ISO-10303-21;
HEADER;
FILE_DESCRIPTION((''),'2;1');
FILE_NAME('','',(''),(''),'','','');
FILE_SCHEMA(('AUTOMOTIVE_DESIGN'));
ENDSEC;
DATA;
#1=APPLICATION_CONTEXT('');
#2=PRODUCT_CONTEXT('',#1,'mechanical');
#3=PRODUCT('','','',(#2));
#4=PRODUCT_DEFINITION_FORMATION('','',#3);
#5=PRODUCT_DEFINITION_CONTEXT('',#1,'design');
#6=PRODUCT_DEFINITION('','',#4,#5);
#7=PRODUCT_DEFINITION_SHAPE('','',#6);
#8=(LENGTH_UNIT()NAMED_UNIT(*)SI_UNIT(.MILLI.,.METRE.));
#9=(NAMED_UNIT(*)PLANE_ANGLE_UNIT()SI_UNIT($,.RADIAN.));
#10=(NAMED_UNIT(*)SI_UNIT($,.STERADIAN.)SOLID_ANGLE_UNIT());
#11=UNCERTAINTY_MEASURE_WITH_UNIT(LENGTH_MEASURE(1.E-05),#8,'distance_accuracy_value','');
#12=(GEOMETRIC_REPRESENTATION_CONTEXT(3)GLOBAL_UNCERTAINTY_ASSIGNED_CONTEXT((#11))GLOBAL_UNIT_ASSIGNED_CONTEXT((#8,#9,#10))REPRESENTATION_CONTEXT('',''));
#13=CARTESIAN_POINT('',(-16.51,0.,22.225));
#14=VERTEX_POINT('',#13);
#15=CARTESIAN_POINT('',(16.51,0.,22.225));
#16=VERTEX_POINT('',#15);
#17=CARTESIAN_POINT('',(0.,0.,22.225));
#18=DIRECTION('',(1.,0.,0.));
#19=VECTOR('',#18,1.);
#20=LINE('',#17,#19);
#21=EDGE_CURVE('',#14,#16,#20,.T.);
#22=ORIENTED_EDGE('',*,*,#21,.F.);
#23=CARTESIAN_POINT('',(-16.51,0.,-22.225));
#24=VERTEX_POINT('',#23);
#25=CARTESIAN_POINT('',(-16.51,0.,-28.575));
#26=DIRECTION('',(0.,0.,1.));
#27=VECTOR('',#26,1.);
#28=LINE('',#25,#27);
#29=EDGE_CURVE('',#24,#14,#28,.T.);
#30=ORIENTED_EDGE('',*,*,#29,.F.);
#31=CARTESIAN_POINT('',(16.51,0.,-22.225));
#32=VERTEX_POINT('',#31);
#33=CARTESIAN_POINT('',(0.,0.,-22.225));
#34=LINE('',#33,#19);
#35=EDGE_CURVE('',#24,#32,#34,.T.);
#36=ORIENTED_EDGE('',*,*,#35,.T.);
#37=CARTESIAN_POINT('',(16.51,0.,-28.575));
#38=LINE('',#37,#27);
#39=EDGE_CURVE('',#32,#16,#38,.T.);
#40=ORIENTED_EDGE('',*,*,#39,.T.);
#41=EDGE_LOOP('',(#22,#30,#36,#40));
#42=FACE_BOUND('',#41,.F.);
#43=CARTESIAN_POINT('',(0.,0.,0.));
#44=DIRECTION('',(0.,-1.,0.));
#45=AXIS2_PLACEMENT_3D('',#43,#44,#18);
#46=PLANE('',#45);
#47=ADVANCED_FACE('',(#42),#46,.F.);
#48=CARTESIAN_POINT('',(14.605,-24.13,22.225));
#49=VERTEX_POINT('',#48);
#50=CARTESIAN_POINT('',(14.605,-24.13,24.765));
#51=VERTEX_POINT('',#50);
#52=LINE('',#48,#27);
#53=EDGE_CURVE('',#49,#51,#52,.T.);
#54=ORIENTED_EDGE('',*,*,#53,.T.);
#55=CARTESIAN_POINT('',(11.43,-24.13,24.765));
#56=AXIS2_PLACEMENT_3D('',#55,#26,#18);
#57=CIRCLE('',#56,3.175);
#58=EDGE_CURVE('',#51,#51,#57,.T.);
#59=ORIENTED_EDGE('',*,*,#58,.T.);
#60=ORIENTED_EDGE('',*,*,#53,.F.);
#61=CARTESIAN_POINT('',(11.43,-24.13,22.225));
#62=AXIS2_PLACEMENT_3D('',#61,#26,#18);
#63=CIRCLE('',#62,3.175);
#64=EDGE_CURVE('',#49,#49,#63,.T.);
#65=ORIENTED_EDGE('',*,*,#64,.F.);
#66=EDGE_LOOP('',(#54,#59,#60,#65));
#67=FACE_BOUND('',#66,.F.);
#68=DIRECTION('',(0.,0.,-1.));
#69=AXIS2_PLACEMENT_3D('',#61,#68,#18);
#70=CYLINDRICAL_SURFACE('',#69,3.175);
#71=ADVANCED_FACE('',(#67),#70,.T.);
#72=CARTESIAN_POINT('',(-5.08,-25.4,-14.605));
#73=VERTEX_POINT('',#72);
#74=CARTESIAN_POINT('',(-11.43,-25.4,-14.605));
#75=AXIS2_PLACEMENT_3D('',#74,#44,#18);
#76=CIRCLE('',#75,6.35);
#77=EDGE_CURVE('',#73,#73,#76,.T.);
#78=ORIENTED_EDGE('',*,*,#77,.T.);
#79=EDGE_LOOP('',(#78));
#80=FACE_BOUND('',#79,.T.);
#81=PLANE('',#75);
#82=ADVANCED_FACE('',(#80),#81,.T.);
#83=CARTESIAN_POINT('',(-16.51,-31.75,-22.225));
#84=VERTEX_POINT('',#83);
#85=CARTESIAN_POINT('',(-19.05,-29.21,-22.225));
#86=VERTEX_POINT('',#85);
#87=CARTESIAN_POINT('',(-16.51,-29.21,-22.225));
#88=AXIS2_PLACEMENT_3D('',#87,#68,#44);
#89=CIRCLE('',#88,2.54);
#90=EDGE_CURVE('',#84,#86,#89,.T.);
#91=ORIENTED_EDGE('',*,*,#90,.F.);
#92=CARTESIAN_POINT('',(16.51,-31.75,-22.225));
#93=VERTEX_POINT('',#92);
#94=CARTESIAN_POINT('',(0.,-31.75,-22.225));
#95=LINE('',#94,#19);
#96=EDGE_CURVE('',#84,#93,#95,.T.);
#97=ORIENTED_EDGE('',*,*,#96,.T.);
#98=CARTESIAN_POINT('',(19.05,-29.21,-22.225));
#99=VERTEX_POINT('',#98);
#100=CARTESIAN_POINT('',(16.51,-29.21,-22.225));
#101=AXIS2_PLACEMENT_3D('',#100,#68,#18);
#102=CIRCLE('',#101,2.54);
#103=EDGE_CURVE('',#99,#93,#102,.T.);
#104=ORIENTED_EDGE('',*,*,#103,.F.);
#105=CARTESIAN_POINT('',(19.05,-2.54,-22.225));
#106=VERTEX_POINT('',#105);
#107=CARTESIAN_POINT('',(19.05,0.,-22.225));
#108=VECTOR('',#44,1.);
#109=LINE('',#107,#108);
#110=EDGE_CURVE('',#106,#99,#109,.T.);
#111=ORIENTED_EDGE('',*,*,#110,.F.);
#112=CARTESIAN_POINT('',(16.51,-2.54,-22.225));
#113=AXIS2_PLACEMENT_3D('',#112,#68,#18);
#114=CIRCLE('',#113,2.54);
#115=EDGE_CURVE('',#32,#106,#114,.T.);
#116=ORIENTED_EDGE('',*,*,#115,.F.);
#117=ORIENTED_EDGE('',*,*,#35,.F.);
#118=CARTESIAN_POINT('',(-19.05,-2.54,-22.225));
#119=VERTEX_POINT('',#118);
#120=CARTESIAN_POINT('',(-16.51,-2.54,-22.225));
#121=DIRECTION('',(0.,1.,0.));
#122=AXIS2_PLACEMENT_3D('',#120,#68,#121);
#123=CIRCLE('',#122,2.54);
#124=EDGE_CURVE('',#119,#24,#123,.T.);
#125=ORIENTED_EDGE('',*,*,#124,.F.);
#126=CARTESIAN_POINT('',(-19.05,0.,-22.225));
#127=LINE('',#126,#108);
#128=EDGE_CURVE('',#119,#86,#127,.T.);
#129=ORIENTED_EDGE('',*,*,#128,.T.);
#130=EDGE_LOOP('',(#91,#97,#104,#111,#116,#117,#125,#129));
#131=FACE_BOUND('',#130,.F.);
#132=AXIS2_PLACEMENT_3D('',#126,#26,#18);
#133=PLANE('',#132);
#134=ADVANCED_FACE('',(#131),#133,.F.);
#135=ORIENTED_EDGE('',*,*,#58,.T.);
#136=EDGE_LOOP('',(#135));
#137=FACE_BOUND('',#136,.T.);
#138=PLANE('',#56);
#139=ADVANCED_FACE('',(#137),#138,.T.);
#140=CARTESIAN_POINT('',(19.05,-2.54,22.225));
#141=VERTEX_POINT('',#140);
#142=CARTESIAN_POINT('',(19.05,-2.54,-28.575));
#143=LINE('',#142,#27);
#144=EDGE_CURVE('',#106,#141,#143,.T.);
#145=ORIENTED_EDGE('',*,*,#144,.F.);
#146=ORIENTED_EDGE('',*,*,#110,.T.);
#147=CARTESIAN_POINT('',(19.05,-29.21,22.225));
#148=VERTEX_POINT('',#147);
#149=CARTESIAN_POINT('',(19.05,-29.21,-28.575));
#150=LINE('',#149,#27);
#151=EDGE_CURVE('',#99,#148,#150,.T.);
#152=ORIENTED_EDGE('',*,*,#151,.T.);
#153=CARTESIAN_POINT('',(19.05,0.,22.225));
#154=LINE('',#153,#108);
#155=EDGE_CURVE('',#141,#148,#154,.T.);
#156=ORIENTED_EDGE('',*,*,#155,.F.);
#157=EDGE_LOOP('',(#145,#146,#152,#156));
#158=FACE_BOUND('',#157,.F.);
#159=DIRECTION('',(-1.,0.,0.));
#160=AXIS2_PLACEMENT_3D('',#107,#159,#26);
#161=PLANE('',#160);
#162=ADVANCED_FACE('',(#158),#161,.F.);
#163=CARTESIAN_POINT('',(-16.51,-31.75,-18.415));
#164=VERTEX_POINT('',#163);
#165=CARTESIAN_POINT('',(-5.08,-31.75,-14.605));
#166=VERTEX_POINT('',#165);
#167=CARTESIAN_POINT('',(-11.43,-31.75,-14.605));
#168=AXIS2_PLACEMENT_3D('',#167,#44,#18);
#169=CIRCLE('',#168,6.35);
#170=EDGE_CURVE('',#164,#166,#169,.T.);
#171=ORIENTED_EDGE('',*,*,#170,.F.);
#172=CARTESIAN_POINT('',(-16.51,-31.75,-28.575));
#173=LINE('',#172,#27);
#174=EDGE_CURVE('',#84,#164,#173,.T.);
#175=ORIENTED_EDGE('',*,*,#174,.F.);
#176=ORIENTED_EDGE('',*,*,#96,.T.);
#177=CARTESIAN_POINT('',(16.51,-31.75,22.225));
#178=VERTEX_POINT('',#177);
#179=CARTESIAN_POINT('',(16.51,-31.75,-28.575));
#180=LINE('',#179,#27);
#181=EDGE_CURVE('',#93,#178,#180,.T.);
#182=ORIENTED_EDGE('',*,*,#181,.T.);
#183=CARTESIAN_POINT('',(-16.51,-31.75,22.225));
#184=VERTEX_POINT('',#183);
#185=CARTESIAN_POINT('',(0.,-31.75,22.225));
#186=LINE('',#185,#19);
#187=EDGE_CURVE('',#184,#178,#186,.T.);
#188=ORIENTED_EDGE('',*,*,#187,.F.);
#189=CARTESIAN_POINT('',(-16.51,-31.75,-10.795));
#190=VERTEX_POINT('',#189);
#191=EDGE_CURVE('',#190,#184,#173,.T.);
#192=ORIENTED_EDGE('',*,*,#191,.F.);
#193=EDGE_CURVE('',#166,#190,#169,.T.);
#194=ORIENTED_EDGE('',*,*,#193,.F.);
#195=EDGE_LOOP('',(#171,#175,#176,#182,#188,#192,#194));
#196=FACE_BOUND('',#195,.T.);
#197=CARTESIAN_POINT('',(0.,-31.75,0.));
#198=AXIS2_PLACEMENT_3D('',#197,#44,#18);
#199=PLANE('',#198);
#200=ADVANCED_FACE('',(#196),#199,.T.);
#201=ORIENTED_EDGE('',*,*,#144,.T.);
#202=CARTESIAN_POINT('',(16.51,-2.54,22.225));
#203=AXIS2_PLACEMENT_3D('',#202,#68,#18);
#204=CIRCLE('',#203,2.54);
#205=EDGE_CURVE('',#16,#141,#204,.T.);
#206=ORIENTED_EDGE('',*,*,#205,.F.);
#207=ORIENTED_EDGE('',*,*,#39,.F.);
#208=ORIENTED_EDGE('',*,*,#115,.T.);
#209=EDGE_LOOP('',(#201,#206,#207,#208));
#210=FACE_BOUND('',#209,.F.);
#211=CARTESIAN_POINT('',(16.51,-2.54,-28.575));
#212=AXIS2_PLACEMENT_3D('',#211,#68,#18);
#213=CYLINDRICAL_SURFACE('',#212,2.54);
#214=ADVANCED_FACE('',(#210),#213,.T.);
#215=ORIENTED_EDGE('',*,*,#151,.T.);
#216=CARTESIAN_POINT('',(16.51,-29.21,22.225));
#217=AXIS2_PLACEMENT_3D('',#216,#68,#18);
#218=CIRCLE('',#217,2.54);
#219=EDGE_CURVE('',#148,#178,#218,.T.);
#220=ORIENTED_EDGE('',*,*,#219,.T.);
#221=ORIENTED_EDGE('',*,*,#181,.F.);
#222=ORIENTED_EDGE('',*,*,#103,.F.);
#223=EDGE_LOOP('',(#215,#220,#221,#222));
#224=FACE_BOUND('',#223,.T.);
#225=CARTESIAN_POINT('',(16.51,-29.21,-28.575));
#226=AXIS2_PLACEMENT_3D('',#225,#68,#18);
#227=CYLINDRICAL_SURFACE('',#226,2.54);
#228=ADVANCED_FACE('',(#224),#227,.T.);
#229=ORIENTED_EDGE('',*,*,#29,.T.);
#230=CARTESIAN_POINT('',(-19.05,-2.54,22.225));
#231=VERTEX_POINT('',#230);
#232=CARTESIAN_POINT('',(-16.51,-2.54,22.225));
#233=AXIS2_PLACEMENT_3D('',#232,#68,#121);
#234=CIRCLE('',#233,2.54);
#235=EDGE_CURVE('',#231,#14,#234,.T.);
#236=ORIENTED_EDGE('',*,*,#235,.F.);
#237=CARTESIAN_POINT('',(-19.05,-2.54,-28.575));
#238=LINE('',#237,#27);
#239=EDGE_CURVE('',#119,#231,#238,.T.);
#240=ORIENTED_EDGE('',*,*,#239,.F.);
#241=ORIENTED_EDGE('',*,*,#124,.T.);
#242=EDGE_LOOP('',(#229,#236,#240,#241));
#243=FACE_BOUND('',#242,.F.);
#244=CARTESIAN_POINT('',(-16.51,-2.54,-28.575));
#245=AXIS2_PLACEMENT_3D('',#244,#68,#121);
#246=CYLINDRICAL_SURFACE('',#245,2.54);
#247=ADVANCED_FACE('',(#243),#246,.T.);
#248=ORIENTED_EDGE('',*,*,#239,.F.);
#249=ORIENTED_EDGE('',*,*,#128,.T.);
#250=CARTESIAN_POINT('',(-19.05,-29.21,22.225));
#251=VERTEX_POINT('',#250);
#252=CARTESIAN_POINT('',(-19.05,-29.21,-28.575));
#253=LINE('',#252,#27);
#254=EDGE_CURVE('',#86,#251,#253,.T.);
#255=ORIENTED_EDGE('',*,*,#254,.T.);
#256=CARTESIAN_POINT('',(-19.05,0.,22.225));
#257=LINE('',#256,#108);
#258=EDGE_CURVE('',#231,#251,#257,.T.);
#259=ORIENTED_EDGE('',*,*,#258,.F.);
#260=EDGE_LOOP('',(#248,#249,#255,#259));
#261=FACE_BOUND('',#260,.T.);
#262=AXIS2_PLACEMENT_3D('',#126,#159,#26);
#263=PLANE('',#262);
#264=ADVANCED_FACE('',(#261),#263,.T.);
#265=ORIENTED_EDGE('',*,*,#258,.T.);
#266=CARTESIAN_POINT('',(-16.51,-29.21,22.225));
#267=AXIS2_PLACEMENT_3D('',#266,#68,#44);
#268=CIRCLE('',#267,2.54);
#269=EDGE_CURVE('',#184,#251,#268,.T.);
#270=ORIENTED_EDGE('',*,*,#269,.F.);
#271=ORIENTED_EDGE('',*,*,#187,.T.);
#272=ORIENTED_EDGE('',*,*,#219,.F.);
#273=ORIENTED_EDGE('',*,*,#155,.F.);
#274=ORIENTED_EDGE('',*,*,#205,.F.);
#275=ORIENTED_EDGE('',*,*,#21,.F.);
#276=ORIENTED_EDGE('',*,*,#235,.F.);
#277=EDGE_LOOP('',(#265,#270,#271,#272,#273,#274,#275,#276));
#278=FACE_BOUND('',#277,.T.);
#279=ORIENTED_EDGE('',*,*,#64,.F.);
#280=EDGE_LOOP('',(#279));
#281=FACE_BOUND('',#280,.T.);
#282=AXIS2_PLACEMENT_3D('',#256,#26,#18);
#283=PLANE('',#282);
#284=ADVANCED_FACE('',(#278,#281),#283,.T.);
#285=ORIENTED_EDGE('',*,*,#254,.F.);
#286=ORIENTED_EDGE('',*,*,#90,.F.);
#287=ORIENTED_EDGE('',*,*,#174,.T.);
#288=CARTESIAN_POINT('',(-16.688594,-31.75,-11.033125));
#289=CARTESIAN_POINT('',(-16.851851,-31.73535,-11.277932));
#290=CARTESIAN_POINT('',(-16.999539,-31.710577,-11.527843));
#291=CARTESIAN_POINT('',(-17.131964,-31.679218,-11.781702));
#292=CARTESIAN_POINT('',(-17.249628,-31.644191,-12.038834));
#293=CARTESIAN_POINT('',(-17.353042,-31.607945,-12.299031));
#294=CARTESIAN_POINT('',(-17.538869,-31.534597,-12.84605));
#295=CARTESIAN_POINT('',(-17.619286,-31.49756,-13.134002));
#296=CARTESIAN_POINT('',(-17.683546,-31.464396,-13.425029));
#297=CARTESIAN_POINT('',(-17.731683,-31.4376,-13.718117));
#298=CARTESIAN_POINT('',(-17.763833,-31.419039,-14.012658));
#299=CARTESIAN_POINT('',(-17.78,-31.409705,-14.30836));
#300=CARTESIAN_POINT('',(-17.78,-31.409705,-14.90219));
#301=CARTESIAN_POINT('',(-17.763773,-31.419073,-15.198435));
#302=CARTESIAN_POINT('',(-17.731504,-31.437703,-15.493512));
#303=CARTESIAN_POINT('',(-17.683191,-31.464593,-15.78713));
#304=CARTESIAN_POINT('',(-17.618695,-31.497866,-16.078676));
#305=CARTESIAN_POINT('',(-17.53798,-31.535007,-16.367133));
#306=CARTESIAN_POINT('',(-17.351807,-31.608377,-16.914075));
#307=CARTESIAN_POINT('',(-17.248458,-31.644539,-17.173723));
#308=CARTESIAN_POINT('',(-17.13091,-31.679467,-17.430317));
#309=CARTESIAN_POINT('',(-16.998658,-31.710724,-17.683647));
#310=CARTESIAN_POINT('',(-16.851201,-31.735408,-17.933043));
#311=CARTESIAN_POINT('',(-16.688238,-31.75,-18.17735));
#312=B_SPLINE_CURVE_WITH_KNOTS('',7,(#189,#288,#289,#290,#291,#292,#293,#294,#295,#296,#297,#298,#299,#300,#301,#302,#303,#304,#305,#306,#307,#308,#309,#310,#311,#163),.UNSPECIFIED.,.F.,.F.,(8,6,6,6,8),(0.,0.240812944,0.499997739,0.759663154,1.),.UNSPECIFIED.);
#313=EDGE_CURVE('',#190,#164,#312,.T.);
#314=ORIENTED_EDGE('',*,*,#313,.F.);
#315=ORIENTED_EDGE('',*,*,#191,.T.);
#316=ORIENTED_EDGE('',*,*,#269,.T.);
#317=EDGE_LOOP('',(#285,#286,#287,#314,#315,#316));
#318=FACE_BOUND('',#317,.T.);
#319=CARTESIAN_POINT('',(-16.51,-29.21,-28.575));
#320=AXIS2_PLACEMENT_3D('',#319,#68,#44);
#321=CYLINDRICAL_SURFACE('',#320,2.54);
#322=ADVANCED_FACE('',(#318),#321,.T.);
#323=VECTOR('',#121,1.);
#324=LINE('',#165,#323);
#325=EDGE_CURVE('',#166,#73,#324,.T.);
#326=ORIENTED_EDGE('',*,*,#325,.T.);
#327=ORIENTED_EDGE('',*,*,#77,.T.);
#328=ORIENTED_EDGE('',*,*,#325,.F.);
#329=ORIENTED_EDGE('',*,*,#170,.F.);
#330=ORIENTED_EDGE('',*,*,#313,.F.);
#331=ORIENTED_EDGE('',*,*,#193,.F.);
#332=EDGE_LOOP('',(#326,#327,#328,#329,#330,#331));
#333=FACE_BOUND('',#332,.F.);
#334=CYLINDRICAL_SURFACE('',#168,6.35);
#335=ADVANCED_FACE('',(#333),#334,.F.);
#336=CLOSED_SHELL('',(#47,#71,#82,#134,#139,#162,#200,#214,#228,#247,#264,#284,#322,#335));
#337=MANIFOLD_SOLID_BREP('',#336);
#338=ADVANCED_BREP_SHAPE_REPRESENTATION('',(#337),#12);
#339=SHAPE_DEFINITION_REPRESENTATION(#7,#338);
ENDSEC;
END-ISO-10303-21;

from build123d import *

# Parameters (mm, degrees)
F0_W        = 38.1
F0_H        = 44.45
F1_DEPTH    = 31.75
F2_R        = 6.35
F3_DEPTH    = 6.35
F4_R        = 3.175
F5_DEPTH    = 2.54
F6_T1_DEPTH = 57.15


# Not quite as in the source:
# - a fillet or chamfer that OpenCascade refuses, or shapes differently, is made with other operations: its cross-section is extruded or revolved along the edge and cut away or added


with BuildPart() as f1:
    # F0 (on Front) → F1 (new body)
    with BuildSketch(Plane.XZ):
        Rectangle(F0_W, F0_H)
    extrude(amount=F1_DEPTH)

    # F2 (on face) → F3 (cut)
    with BuildSketch(Plane.XZ.offset(31.75)):
        with Locations((-11.43, -14.605)):
            Circle(F2_R)
    extrude(amount=-F3_DEPTH, mode=Mode.SUBTRACT)

    # F4 (on face) → F5 (join)
    with BuildSketch(Plane.XY.offset(22.225)):
        with Locations((11.43, -24.13)):
            Circle(F4_R)
    extrude(amount=F5_DEPTH)

    # F6: fillet of radius 2.54 on 4 edges, made by hand

    # F6_s2 → F6_t1 (cut)
    with BuildSketch(Plane.XY.offset(-28.575)):
        with BuildLine():
            ThreePointArc((-16.51, -31.75), (-18.3060512242, -31.0060512242), (-19.05, -29.21))
            Line((-19.05, -29.21), (-19.05, -31.75))
            Line((-19.05, -31.75), (-16.51, -31.75))
        make_face()
        with BuildLine():
            ThreePointArc((19.05, -29.21), (18.3060512242, -31.0060512242), (16.51, -31.75))
            Line((16.51, -31.75), (19.05, -31.75))
            Line((19.05, -31.75), (19.05, -29.21))
        make_face()
        with BuildLine():
            ThreePointArc((-16.51, 0), (-18.3060512242, -0.7439487758), (-19.05, -2.54))
            Line((-19.05, -2.54), (-19.05, 0))
            Line((-19.05, 0), (-16.51, 0))
        make_face()
        with BuildLine():
            ThreePointArc((19.05, -2.54), (18.3060512242, -0.7439487758), (16.51, 0))
            Line((16.51, 0), (19.05, 0))
            Line((19.05, 0), (19.05, -2.54))
        make_face()
    extrude(amount=F6_T1_DEPTH, mode=Mode.SUBTRACT)


solid = f1.part
